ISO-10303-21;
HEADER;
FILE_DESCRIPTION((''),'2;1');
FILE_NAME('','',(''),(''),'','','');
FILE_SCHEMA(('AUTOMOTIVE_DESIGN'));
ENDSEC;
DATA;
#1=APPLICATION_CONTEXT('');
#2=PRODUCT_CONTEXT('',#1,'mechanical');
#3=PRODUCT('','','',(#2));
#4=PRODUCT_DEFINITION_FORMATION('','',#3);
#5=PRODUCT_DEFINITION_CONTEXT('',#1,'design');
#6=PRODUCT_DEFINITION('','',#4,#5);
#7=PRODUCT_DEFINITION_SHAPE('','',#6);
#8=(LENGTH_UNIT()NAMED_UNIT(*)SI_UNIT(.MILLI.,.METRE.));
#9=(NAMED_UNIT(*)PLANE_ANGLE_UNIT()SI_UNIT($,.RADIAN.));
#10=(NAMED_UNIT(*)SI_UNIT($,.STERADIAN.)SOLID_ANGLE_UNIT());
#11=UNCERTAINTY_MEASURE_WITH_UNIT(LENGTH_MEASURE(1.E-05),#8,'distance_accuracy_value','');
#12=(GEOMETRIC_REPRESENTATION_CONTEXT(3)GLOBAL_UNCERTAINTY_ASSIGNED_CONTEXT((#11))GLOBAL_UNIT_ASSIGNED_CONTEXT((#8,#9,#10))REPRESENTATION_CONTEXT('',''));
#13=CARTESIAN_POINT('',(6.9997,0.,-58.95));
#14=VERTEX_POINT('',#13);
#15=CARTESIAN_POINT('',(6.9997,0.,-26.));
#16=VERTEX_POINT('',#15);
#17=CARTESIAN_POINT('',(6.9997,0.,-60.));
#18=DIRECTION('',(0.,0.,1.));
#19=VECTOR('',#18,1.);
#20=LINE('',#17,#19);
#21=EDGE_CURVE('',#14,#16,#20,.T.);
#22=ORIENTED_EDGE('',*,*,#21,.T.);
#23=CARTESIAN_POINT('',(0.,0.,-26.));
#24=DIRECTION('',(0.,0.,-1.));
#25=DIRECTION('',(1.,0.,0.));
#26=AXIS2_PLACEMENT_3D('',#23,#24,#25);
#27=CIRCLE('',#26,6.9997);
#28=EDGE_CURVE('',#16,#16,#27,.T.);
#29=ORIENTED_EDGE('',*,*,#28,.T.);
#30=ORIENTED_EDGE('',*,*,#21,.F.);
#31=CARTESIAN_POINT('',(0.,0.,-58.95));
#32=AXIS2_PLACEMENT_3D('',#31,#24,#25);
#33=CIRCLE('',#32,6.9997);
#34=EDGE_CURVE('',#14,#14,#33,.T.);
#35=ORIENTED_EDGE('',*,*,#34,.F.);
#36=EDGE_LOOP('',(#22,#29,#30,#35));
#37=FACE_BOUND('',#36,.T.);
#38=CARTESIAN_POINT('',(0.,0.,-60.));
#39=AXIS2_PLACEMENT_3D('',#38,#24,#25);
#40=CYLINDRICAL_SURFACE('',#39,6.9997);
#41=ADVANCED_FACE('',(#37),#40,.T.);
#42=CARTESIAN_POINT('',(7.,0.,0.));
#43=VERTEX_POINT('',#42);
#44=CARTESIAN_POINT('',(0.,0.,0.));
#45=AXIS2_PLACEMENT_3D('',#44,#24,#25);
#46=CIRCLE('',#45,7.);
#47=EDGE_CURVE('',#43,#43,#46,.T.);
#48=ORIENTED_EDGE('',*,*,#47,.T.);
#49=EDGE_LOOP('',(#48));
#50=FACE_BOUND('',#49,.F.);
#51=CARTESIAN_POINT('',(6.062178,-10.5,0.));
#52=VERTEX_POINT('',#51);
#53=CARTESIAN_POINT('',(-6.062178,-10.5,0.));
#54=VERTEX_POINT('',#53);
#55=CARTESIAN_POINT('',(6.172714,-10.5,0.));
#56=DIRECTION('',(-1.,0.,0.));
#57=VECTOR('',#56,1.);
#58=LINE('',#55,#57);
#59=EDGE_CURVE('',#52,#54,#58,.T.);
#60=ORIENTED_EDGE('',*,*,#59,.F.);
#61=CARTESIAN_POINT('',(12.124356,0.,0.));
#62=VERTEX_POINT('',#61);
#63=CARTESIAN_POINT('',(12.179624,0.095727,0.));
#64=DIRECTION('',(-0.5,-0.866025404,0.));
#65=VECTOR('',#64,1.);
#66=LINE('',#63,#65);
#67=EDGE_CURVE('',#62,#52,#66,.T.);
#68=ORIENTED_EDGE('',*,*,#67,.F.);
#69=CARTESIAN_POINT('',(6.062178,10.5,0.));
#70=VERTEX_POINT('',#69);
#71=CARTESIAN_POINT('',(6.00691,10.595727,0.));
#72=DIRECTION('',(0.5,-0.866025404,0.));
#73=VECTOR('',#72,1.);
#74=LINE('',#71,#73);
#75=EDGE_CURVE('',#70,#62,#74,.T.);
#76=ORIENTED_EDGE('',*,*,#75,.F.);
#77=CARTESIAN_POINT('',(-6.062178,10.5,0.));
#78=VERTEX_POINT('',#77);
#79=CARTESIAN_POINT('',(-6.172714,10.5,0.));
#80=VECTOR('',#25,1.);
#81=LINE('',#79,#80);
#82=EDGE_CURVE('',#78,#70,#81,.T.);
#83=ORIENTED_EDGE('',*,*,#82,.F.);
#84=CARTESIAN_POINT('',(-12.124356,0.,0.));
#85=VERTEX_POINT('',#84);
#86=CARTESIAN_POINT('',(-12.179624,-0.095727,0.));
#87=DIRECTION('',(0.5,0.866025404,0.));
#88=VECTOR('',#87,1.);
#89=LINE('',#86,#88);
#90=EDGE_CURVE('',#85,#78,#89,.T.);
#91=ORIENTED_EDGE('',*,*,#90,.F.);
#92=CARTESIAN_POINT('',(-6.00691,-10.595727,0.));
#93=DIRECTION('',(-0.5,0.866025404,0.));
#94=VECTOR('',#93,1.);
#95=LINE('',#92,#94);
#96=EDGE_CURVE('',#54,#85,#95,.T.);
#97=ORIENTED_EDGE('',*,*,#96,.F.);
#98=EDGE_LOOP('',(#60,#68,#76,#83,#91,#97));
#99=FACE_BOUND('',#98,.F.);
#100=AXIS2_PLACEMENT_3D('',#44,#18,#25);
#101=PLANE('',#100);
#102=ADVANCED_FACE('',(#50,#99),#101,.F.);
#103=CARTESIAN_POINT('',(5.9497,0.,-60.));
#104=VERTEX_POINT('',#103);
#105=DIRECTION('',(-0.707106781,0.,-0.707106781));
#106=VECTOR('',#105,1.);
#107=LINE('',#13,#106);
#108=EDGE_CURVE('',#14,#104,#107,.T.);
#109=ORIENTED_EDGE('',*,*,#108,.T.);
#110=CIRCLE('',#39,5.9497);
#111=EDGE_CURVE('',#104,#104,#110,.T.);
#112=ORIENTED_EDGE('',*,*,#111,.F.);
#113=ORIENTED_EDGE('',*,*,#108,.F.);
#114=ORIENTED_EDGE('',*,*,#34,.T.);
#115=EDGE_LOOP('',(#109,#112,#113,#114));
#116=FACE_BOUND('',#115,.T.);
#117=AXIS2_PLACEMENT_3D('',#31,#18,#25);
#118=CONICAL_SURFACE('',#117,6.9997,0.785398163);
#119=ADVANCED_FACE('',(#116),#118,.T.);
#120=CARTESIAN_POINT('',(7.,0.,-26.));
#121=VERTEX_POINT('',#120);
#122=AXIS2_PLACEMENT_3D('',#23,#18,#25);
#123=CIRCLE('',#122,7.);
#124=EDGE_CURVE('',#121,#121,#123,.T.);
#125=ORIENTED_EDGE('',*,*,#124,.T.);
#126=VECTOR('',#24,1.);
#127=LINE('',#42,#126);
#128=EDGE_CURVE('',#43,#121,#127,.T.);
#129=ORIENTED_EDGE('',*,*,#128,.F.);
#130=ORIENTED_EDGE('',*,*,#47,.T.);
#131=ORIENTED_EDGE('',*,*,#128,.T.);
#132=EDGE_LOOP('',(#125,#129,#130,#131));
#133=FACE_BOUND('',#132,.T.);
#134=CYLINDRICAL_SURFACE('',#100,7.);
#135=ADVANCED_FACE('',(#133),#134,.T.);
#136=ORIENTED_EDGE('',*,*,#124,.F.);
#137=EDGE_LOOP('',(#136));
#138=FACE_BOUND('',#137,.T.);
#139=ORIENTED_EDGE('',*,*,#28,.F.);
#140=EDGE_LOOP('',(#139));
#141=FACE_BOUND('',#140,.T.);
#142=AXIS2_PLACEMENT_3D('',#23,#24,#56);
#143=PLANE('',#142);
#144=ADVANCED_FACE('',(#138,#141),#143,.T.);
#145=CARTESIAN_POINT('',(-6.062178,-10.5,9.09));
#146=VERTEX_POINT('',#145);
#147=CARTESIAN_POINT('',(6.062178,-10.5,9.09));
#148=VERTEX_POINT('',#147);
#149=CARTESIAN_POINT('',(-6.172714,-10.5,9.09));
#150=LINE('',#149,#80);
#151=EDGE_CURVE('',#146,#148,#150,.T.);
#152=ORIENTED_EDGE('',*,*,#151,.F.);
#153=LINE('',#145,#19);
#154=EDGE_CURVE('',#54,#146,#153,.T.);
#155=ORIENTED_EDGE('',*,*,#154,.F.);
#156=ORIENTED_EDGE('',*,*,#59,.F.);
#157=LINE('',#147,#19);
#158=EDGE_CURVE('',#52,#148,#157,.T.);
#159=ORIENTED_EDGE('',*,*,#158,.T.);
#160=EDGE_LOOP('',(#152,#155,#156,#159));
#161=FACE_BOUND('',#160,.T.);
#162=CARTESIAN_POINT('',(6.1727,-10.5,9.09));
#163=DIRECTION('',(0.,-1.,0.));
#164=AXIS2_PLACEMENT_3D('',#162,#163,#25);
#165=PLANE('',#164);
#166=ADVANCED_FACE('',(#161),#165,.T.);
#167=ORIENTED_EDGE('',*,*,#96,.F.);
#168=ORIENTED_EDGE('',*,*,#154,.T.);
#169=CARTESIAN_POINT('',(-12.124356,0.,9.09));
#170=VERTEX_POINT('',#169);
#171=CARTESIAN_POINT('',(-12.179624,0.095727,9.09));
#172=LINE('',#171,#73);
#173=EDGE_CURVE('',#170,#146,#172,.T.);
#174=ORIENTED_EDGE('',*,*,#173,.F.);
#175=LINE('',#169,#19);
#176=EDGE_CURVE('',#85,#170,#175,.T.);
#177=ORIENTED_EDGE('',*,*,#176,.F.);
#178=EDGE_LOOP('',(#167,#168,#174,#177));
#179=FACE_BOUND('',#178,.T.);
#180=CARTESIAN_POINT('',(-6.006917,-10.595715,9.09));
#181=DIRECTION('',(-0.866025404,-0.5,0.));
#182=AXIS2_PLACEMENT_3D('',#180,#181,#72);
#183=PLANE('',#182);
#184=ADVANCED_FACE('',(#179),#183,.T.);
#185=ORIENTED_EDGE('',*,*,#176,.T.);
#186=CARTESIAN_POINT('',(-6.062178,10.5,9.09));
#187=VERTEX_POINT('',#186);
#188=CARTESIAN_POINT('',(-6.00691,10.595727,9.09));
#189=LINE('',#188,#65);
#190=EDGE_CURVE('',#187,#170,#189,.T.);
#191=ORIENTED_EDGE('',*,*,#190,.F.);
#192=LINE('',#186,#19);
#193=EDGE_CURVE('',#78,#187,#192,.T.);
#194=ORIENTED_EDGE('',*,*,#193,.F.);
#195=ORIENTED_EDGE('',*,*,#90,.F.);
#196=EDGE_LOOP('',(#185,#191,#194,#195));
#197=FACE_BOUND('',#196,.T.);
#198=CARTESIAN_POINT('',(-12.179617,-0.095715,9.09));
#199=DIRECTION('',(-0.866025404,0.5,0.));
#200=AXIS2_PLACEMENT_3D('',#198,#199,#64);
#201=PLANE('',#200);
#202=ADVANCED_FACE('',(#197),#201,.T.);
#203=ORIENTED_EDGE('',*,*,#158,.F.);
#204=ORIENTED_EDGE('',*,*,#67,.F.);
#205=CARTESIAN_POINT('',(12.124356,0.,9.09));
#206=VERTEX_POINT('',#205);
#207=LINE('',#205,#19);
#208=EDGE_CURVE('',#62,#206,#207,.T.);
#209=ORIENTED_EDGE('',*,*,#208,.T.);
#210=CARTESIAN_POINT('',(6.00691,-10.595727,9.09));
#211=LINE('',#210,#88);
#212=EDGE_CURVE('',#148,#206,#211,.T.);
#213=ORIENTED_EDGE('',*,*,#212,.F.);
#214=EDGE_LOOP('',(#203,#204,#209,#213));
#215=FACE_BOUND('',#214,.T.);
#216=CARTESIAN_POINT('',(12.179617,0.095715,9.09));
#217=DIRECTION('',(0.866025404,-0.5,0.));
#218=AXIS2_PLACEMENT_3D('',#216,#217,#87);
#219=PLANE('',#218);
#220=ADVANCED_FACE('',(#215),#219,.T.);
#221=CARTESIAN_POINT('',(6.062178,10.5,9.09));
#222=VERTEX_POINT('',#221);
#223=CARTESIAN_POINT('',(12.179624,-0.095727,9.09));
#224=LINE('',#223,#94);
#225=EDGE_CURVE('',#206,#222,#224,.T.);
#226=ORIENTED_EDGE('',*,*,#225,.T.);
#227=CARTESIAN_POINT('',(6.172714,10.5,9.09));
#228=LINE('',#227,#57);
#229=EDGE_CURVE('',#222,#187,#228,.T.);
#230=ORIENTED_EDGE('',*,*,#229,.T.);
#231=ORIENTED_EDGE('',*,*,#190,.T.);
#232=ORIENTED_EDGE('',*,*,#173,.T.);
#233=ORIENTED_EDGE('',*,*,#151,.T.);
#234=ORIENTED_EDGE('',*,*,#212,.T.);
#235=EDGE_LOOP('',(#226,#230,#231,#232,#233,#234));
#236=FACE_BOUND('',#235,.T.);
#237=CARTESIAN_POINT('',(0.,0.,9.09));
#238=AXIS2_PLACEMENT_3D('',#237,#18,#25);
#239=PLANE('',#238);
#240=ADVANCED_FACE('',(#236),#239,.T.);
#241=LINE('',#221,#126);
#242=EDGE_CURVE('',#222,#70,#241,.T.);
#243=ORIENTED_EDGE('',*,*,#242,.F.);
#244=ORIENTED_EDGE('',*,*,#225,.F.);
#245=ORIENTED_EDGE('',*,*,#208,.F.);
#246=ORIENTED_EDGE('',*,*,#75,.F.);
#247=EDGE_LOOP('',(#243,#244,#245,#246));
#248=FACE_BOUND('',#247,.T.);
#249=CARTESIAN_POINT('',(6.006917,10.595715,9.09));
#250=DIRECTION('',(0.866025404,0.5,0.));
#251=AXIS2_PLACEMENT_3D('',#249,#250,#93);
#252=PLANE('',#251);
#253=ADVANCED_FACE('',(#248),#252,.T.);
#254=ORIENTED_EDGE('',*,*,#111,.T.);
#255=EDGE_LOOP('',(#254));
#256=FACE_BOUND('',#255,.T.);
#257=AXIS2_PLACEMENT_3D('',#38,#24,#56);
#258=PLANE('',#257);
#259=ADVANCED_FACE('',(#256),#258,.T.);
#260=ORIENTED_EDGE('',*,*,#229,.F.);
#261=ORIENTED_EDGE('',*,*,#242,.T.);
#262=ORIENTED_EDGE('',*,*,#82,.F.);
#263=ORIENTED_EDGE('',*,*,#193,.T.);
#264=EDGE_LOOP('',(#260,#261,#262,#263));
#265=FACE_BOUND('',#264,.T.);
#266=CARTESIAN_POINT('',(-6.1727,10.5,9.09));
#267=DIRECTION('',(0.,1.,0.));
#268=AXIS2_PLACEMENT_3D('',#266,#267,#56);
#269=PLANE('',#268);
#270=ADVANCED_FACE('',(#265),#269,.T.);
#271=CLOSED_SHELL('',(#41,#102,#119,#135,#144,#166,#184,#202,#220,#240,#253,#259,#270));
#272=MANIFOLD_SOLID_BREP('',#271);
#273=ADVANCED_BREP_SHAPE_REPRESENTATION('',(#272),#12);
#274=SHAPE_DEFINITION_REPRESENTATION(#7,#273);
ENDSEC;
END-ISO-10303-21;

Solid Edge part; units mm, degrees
sketch "Sketch1" plane through (0, 0, 0) normal (0, 0, 1) x (1, 0, 0)
  circle A0 centre (0, 0) radius 12.18
  dimension "D1" = 24.36
extrude "Protrusion1" add sketch "Sketch1" along normal blind 9.09
sketch "Sketch2" plane through (0, 0, 0) normal (0, 0, -1) x (1, 0, 0)
  circle A0 centre (0, 0) radius 7
extrude "Protrusion2" add sketch "Sketch2" along normal blind 60
sketch "Sketch3" plane through (0, 0, -60) normal (0, 0, -1) x (1, 0, 0)
  circle A0 centre (0, 0) radius 6.9997
extrude "Cutout1" cut sketch "Sketch3" against normal blind 34 flip side to cut
chamfer "Chamfer_1" distance 1.05 angle 45 1 edges at (-6.9997, 0, -60)
sketch "Sketch4" plane through (0, 0, 9.09) normal (0, 0, 1) x (1, 0, 0)
  line L0 (-6.1727, 10.5) -> (6.1727, 10.5)
  dimension "D1" = 21
extrude "Cutout2" cut sketch "Sketch4" against normal up to next material side at (0, 10.55, 9.09)
pattern_circular "Pattern1" count 6 over 360 about axis through (0, 0, 9.09) along (0, 0, 1) of "Cutout2"
properties part number "201051"
